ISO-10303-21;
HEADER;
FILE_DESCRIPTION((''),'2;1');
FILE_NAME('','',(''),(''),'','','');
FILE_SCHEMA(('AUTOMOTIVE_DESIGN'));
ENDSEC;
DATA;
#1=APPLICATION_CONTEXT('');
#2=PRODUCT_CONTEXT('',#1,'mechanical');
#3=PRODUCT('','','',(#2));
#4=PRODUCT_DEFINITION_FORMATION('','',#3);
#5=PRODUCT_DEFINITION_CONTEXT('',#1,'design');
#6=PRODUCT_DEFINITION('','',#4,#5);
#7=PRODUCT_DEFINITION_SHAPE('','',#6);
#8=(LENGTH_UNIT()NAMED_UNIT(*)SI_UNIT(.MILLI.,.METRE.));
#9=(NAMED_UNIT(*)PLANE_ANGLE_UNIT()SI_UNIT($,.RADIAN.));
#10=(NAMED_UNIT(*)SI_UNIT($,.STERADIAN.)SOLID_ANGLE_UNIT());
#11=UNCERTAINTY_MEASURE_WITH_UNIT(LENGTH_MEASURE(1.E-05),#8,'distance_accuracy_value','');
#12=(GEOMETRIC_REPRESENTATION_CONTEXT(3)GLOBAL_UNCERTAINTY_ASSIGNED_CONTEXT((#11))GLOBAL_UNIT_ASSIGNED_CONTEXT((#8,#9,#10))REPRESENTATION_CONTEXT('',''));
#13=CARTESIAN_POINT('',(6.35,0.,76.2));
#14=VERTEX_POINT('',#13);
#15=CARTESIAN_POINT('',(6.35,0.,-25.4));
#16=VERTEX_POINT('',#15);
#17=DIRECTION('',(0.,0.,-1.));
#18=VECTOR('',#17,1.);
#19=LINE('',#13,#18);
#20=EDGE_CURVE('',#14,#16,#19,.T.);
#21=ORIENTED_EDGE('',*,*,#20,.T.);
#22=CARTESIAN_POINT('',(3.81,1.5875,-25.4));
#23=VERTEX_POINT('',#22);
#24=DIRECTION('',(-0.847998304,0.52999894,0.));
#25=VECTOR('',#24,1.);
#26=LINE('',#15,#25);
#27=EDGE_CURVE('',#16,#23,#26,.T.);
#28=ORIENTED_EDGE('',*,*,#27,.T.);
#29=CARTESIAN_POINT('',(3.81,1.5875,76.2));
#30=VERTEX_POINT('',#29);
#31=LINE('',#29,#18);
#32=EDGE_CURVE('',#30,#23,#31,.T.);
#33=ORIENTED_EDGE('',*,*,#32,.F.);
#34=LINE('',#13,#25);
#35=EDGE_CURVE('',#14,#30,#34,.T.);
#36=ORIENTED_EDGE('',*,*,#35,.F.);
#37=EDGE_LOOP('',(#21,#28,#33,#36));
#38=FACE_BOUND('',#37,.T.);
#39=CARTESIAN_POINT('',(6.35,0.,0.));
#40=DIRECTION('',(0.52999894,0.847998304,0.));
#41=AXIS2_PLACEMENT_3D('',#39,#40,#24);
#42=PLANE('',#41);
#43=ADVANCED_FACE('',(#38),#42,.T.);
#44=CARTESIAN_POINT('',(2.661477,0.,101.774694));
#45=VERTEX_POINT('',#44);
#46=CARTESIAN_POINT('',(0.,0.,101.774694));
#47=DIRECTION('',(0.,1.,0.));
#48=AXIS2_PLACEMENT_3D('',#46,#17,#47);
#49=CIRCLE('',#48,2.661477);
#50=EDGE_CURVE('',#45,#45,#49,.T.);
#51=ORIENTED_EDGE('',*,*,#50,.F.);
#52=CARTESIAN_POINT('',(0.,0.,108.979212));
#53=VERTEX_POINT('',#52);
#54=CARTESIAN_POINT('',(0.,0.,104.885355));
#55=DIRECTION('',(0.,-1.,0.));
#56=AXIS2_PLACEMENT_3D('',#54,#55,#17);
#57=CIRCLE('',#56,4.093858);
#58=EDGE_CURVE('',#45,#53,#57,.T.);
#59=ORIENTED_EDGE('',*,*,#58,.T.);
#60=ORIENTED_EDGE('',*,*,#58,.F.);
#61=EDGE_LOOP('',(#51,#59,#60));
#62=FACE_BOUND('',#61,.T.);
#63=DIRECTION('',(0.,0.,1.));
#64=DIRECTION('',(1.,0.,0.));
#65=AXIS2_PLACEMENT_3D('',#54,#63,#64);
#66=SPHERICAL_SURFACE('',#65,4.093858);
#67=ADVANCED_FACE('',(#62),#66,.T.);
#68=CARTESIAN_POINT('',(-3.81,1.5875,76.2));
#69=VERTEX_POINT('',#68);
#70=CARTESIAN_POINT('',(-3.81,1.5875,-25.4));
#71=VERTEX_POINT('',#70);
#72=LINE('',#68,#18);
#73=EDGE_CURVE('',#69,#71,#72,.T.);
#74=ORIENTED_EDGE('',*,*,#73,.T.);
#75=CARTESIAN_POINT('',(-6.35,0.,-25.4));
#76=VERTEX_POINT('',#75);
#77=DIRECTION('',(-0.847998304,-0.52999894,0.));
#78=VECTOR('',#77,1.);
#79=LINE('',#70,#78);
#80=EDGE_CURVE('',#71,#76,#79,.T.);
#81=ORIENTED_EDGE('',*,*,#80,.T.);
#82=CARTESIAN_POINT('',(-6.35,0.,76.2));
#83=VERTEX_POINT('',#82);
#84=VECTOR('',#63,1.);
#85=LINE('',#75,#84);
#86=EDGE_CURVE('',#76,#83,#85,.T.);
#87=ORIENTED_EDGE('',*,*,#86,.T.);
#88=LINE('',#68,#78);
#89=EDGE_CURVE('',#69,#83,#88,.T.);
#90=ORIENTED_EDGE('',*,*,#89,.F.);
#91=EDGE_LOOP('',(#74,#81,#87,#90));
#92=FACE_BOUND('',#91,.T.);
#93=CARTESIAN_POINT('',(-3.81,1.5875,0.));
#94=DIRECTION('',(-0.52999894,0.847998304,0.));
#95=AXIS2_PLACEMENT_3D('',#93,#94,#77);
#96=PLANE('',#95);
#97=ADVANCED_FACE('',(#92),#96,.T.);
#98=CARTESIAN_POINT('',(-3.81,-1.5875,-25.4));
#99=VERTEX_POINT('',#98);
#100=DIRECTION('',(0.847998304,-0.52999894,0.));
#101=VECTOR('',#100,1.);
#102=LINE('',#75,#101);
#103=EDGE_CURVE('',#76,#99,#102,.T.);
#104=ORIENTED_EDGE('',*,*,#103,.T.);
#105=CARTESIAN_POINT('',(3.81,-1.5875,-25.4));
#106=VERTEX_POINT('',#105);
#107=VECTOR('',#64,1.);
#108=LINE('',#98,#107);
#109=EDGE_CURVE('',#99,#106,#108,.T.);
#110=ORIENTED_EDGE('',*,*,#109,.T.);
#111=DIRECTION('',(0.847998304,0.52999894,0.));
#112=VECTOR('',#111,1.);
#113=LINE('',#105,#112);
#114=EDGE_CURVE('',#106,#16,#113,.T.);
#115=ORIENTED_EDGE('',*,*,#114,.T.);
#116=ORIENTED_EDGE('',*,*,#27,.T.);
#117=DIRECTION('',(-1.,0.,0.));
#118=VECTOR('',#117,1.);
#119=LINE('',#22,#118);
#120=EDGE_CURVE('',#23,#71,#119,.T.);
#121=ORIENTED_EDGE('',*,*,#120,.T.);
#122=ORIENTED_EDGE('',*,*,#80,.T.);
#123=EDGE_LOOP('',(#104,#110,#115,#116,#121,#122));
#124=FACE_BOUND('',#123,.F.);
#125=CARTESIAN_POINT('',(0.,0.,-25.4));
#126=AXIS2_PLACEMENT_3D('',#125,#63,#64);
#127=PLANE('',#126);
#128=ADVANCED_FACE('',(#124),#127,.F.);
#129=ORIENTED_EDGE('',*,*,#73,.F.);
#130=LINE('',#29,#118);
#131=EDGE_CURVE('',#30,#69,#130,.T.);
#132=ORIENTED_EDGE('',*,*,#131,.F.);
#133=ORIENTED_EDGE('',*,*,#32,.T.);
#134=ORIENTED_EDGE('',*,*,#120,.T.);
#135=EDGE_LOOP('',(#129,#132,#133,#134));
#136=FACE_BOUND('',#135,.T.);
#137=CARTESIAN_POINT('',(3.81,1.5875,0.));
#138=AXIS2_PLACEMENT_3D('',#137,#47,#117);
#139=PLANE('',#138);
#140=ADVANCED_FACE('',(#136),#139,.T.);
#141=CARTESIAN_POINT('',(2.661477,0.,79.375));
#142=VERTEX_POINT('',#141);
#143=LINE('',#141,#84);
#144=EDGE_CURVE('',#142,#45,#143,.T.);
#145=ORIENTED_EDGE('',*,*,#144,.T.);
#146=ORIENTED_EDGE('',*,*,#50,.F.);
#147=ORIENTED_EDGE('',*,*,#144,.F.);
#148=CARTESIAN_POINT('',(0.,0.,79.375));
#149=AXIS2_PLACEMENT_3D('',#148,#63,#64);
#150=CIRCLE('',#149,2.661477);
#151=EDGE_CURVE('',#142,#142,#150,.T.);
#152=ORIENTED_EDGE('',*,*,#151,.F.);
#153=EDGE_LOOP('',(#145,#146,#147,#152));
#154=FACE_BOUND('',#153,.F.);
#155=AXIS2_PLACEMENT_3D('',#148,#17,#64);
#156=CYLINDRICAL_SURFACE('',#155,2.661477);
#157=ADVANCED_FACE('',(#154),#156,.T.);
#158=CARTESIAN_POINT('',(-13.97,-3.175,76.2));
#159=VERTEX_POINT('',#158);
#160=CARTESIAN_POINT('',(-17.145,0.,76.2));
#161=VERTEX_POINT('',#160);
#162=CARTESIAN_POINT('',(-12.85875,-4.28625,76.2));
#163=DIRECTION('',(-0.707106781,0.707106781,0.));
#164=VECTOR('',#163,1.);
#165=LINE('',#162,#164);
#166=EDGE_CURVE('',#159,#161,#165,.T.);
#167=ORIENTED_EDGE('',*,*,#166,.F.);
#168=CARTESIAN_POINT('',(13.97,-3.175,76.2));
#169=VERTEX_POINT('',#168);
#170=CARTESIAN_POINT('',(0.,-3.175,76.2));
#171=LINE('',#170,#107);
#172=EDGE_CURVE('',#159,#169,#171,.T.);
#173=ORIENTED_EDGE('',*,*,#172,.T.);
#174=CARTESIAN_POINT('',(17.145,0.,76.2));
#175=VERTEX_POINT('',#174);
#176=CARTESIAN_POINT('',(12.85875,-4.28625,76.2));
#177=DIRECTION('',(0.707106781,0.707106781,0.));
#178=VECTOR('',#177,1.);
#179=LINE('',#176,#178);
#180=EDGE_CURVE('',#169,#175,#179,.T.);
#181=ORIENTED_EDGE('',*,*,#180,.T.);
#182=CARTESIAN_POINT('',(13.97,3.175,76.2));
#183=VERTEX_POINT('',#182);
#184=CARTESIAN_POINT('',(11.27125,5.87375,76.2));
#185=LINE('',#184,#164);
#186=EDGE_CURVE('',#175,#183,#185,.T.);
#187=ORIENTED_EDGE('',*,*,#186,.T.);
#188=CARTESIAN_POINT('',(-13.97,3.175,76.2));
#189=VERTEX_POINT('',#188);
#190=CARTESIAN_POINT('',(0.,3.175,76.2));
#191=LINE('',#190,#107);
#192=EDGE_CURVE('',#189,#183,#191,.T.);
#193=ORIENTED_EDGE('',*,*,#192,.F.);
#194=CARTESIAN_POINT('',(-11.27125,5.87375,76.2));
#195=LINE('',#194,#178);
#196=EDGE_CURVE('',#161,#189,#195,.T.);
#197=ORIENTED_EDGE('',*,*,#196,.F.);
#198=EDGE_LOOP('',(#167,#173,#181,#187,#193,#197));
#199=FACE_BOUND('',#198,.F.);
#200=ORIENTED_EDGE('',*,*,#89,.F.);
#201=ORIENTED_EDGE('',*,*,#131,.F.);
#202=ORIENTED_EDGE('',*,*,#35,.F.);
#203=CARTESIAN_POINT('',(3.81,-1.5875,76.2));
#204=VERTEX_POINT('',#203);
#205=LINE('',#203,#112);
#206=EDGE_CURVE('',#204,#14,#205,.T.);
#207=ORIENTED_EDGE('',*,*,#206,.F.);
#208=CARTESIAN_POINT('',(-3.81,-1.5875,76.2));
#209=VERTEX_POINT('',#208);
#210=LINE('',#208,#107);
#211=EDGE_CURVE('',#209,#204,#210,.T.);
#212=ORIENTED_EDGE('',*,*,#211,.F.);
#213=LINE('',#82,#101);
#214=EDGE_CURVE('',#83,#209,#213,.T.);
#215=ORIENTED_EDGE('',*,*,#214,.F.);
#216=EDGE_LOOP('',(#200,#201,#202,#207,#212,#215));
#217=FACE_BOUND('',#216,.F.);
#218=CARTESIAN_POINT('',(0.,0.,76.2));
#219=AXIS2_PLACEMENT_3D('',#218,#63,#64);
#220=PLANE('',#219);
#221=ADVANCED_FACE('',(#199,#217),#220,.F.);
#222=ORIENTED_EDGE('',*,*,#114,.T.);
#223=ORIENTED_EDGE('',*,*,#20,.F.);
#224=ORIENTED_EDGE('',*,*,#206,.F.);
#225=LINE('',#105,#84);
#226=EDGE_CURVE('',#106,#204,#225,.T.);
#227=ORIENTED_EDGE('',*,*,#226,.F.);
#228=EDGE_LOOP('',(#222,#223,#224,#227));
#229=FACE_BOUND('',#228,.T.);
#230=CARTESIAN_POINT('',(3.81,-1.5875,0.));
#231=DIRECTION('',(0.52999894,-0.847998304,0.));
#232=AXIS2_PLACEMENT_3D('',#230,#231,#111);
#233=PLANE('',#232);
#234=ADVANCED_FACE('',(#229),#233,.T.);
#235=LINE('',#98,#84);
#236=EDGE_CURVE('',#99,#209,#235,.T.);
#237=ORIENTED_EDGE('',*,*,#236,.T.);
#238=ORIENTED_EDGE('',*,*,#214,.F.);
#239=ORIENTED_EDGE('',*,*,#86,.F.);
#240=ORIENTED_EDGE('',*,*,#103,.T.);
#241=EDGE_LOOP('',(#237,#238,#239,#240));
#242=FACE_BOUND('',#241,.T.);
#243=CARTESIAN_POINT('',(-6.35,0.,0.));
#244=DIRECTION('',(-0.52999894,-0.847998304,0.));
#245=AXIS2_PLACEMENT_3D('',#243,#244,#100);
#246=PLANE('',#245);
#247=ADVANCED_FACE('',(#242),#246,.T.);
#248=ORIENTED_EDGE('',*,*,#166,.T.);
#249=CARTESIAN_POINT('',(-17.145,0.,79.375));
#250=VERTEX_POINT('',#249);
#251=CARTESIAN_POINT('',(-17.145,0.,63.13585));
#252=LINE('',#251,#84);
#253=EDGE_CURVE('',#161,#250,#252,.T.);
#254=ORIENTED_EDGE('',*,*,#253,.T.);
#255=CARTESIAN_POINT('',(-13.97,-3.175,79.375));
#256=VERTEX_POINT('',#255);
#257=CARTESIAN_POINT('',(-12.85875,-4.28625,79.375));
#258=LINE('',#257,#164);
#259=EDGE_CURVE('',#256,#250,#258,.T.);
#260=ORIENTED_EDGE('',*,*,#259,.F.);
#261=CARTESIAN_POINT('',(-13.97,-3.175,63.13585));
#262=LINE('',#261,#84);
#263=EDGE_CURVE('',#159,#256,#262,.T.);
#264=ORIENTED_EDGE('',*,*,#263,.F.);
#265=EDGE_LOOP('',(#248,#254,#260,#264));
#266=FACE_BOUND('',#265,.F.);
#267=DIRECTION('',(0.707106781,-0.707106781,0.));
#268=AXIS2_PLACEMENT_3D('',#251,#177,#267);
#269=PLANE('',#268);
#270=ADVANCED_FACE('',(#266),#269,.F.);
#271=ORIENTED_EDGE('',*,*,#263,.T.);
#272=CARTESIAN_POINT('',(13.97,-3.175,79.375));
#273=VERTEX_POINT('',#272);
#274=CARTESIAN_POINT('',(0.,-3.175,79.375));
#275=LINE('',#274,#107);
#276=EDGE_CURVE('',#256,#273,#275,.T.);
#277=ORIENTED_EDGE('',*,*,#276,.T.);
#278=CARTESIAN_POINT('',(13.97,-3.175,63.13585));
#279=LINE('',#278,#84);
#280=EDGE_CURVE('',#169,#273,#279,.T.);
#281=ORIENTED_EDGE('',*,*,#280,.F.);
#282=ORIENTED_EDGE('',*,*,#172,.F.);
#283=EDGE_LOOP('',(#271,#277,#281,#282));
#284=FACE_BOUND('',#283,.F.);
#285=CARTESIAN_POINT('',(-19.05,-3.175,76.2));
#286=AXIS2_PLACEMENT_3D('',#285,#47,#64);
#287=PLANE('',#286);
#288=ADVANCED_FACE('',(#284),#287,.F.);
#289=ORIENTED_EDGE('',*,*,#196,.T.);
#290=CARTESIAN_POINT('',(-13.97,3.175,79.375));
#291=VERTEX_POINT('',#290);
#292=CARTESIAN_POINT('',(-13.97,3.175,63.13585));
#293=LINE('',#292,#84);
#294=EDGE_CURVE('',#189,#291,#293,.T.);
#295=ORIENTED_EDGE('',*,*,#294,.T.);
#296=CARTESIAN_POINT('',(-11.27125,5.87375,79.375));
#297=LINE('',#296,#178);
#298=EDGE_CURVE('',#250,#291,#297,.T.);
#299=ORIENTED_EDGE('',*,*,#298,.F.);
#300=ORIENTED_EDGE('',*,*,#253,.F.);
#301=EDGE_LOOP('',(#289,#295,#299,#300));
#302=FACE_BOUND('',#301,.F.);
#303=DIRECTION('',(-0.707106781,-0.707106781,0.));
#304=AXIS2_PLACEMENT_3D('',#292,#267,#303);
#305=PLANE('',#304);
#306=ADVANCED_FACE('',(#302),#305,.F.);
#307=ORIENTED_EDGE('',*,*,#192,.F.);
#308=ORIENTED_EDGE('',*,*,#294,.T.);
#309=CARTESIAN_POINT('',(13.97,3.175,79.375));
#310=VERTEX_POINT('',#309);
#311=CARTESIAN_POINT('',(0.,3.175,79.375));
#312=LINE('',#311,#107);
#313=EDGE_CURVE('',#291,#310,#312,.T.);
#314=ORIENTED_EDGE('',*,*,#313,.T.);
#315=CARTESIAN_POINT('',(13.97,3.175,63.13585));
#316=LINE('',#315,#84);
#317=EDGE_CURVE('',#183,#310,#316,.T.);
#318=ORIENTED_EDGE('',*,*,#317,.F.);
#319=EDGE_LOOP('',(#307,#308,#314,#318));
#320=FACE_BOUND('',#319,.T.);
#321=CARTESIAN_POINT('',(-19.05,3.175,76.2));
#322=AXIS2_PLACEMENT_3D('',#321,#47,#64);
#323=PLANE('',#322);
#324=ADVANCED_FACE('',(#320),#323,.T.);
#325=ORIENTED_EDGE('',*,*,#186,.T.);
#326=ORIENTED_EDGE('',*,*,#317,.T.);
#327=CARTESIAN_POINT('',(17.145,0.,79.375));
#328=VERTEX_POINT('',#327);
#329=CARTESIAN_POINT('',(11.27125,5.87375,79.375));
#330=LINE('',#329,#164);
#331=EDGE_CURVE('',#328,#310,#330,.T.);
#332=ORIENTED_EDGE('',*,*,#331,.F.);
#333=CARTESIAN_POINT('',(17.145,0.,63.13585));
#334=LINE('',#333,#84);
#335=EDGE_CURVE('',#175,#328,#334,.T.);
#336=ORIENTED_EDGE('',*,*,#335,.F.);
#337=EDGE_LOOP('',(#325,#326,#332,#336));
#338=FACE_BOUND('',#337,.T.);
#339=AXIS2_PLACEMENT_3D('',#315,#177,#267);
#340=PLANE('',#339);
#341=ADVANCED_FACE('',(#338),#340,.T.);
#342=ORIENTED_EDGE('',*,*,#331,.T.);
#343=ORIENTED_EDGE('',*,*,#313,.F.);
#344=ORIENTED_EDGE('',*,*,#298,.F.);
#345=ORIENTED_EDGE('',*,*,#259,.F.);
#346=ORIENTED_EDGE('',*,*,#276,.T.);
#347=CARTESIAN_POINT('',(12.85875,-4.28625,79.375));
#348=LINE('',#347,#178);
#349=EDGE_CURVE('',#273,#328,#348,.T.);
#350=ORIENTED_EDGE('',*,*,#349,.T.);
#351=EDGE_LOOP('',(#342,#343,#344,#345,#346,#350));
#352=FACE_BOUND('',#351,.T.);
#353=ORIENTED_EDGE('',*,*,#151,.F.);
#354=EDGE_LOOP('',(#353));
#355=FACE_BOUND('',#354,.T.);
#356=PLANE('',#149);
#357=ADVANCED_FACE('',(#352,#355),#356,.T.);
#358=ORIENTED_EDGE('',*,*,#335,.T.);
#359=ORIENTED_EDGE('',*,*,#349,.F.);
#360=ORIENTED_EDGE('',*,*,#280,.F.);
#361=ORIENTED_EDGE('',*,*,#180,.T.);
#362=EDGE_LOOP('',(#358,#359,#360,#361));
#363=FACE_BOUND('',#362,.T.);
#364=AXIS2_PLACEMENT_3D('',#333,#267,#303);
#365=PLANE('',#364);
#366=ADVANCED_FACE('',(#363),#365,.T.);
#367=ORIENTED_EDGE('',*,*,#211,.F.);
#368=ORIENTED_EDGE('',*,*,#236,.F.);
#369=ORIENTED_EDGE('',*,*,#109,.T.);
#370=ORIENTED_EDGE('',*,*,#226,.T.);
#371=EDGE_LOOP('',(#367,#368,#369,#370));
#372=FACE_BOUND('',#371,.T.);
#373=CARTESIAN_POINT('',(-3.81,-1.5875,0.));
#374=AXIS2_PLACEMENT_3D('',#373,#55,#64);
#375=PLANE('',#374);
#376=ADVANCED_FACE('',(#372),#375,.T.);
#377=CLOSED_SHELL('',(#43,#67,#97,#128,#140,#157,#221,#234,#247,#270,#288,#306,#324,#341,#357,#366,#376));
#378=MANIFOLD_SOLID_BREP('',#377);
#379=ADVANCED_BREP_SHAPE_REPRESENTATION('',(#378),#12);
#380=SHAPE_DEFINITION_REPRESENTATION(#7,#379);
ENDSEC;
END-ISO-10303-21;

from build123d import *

# Parameters (mm, degrees)
F1_DEPTH    = 76.2
F2_W        = 38.1
F2_H        = 6.35
F3_DEPTH    = 3.175
F4_T1_DEPTH = 29.3032991577
F5_R        = 2.6614768155
F6_DEPTH    = 25.4
F10_DEPTH   = 25.4


# Not quite as in the source:
# - a fillet or chamfer that OpenCascade refuses, or shapes differently, is made with other operations: its cross-section is extruded or revolved along the edge and cut away or added


with BuildPart() as f1:
    # F0 (on Top) → F1 (new body)
    with BuildSketch(Plane.XY):
        Polygon((0, 1.5875), (-3.81, 1.5875), (-6.35, 0), (-3.81, -1.5875), (0, -1.5875), (3.81, -1.5875), (6.35, 0), (3.81, 1.5875), align=None)
    extrude(amount=F1_DEPTH)

    # F2 (on face) → F3 (join)
    with BuildSketch(Plane.XY.offset(76.2)):
        Rectangle(F2_W, F2_H)
    extrude(amount=F3_DEPTH)

    # F4: chamfer of 5.08 on 4 edges, made by hand

    # F4_s2 → F4_t1 (cut)
    with BuildSketch(Plane.XY.offset(63.1358504211)):
        Polygon((19.05, 1.905), (13.97, -3.175), (19.05, -3.175), align=None)
        Polygon((13.97, 3.175), (19.05, -1.905), (19.05, 3.175), align=None)
        Polygon((-19.05, 1.905), (-13.97, -3.175), (-19.05, -3.175), align=None)
        Polygon((-13.97, 3.175), (-19.05, -1.905), (-19.05, 3.175), align=None)
    extrude(amount=F4_T1_DEPTH, mode=Mode.SUBTRACT)

    # F5 (on face) → F6 (join)
    with BuildSketch(Plane.XY.offset(79.375)):
        Circle(F5_R)
    extrude(amount=F6_DEPTH)

    # F7 (on Front) → F9 (revolve)
    with BuildSketch(Plane.XZ):
        with BuildLine():
            Line((0, 108.979212298), (0, 100.7914969782))
            ThreePointArc((0, 100.7914969782), (4.0938576599, 104.8853546381), (0, 108.979212298))
        make_face()
    revolve(axis=Axis((0, 0, 105.8157756925), (0, 0, 1)))

    # F10 (add): a face of the model
    f10_faces = [f1.faces().sort_by_distance(p)[0] for p in [
        (0, 0, 0),
    ]]
    extrude(f10_faces, amount=F10_DEPTH)


solid = f1.part
